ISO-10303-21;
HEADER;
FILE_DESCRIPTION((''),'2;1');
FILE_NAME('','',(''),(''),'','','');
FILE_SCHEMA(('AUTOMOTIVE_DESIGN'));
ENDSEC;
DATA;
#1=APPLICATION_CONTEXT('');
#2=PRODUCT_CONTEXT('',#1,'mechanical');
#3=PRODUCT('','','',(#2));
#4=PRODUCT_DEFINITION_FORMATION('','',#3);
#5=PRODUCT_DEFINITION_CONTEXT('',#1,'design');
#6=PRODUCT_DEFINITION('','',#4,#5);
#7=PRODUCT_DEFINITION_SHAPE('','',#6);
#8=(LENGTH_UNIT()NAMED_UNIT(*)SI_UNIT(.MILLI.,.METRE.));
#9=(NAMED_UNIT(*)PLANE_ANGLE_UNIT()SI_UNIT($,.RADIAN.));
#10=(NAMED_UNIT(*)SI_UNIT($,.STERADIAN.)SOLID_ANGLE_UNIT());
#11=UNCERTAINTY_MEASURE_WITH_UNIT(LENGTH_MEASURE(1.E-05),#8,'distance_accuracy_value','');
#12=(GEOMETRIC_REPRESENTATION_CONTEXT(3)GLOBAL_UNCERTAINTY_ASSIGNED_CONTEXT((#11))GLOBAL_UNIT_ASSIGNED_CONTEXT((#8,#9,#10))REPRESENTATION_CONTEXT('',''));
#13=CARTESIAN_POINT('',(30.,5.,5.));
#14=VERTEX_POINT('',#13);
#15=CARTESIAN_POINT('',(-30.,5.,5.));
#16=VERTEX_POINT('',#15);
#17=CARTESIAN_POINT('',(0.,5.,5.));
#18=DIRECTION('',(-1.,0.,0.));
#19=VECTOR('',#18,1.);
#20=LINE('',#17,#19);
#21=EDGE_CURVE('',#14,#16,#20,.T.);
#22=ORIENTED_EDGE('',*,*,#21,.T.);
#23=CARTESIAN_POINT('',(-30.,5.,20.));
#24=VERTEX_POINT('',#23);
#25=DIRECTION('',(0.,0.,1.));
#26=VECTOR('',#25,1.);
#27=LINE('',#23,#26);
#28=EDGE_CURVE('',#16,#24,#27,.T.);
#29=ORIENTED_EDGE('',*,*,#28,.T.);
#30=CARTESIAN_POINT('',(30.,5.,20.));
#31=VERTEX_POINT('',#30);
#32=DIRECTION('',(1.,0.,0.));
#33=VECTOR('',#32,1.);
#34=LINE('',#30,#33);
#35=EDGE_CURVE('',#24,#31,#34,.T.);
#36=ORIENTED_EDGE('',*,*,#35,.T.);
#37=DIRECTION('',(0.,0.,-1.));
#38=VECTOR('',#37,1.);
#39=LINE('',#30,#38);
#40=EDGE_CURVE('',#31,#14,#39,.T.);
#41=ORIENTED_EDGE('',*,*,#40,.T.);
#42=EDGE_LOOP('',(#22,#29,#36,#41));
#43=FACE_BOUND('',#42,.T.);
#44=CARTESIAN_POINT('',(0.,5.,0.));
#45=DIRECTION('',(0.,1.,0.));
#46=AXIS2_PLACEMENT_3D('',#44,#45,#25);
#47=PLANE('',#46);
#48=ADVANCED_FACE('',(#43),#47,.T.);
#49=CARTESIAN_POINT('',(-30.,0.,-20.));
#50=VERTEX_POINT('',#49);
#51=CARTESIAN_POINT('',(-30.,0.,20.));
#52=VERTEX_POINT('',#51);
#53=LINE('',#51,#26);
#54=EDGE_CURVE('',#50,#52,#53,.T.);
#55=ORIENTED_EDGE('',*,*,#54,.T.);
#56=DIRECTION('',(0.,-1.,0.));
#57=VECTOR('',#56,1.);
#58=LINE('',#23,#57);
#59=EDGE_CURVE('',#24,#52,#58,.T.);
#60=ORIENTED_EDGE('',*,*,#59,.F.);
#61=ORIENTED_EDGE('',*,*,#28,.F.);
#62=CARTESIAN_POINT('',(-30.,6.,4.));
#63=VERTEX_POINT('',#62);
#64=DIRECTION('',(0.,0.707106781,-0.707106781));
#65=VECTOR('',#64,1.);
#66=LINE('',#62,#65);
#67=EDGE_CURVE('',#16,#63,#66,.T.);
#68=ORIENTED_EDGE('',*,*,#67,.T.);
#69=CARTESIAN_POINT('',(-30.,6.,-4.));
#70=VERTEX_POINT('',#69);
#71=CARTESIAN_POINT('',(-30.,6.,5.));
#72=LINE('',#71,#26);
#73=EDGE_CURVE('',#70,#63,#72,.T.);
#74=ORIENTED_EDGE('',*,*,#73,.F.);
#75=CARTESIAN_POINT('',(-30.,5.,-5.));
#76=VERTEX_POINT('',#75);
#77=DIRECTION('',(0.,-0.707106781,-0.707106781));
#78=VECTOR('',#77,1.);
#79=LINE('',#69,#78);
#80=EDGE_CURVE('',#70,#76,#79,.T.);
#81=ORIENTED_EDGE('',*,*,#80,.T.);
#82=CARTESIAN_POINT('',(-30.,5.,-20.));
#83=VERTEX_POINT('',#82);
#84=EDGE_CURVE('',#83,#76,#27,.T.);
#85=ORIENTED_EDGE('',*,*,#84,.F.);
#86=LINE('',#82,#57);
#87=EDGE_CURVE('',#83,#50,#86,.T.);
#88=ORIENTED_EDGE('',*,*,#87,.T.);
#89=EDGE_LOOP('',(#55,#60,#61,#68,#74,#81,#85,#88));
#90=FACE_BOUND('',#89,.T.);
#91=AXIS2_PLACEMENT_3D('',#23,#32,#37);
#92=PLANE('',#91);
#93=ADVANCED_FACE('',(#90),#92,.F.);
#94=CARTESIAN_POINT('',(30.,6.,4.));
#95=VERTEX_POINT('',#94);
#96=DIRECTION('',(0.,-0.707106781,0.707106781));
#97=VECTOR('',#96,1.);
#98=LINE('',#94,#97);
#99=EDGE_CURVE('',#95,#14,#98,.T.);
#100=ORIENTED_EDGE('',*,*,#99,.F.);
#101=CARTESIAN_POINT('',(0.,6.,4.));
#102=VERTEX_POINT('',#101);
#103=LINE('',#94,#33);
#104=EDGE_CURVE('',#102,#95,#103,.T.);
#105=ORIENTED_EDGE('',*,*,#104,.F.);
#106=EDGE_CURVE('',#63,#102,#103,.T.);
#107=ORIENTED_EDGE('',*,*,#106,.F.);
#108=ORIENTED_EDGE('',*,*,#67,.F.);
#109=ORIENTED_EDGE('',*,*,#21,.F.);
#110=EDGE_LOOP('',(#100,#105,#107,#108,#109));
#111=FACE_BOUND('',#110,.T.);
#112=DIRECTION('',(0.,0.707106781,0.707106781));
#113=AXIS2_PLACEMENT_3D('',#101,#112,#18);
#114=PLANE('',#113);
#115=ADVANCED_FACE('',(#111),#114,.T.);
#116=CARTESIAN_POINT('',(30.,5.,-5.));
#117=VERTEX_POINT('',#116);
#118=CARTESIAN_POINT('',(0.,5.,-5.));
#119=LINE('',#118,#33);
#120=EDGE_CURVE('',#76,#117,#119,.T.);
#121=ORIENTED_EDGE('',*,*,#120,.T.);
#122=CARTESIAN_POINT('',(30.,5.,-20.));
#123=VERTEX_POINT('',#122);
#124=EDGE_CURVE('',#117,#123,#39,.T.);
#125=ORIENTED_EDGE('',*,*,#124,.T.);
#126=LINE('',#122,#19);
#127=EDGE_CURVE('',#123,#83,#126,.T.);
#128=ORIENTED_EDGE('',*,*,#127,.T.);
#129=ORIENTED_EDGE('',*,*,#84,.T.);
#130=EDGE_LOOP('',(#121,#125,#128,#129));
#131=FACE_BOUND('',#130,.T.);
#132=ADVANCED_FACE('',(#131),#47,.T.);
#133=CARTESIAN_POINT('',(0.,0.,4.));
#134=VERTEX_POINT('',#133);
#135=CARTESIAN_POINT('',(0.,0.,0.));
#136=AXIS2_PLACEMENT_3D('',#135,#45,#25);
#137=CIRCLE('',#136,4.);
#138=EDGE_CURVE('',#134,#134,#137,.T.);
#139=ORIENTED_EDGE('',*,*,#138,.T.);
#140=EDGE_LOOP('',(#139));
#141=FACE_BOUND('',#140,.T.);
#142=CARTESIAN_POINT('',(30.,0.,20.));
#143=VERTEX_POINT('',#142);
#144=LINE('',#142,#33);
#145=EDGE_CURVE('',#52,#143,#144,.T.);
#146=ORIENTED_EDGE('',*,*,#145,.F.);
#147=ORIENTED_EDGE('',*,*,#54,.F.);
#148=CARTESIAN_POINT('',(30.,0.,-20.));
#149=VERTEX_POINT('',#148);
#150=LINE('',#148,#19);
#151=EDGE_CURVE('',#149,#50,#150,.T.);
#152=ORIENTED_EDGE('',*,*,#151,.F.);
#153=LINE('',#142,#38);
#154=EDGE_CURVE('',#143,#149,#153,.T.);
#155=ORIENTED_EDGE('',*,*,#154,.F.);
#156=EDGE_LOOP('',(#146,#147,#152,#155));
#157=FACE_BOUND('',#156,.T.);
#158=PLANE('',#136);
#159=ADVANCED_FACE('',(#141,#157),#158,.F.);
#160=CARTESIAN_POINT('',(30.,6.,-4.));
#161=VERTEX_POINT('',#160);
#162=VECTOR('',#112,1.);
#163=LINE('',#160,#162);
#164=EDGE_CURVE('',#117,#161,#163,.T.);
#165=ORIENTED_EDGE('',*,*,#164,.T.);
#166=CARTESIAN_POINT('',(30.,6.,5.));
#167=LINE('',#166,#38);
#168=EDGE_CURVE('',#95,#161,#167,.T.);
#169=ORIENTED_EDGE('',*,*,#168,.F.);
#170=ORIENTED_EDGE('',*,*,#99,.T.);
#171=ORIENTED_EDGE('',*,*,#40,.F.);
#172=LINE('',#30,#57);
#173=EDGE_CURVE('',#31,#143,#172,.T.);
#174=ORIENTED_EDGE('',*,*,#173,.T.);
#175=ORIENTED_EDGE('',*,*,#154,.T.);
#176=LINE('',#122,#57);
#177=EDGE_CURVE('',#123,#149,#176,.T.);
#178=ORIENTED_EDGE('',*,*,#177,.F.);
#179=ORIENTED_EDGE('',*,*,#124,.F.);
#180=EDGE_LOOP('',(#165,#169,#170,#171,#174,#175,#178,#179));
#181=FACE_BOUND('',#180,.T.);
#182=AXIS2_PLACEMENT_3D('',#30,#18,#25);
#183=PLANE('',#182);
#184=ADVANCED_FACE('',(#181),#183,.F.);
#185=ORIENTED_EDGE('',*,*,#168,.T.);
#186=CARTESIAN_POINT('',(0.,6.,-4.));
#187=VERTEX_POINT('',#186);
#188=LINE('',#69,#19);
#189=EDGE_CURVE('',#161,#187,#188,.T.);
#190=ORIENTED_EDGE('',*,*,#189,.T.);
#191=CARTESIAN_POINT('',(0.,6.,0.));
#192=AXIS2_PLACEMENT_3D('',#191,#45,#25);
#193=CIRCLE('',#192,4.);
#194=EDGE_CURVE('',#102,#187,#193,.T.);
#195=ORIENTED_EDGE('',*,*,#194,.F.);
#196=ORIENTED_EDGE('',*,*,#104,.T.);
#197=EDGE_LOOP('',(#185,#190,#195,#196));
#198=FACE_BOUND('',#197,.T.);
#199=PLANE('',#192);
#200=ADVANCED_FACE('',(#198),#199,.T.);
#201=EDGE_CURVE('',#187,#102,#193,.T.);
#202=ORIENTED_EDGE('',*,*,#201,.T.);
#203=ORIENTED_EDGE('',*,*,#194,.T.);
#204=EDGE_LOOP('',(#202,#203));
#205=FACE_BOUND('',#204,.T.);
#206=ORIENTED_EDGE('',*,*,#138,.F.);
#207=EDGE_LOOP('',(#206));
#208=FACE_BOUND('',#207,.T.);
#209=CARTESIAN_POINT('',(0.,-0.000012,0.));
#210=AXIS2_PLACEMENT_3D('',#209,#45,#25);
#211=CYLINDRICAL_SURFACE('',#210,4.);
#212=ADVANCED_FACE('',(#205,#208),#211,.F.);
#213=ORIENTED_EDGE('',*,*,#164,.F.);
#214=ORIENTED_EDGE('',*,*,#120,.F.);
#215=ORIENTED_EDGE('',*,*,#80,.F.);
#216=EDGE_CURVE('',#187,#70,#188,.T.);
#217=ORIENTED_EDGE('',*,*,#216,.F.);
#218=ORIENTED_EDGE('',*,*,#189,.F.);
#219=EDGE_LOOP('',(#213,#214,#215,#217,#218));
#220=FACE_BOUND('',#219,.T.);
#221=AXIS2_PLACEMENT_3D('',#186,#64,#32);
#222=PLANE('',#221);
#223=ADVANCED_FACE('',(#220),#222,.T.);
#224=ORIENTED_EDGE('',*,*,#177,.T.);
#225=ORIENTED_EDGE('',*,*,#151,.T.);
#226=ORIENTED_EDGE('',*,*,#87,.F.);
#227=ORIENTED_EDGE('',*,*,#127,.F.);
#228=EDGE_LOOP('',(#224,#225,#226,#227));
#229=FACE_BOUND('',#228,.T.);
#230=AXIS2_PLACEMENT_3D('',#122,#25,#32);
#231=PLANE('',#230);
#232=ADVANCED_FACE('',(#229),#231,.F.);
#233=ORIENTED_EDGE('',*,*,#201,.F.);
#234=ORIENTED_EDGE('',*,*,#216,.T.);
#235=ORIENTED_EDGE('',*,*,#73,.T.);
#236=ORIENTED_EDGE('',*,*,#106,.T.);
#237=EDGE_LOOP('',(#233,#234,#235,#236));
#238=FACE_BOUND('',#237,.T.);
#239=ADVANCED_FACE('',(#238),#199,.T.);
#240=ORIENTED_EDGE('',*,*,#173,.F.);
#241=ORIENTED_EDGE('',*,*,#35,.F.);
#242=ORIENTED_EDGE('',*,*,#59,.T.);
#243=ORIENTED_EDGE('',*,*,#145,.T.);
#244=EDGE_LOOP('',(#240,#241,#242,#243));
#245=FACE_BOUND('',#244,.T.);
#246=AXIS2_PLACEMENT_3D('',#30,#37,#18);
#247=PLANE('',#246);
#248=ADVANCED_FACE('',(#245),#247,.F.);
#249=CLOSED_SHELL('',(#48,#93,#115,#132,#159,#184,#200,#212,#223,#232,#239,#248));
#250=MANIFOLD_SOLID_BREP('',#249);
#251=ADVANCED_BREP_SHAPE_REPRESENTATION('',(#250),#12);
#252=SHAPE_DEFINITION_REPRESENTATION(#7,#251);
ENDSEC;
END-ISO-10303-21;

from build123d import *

# Parameters (mm, degrees)
SZKIC1_W                        = 60
SZKIC1_H                        = 40
DODANIE_WYCI_GNI_CIE1_DEPTH     = 5
SZKIC2_W                        = 60
SZKIC2_H                        = 10
DODANIE_WYCI_GNI_CIE2_DEPTH     = 6
SFAZOWANIE1_SIZE                = 1
WYTNIJ_WYCI_GNI_CIE1_DEPTH      = 37.551333765
WYTNIJ_WYCI_GNI_CIE1_DEPTH_BACK = 37.551333765
SZKIC3_R                        = 4


with BuildPart() as part:
    # Szkic1 → Dodanie-wyciągnięcie1 (new body)
    with BuildSketch(Plane(origin=(0, 0, 0), x_dir=(1, 0, 0), z_dir=(0, 1, 0))):
        Rectangle(SZKIC1_W, SZKIC1_H)
    extrude(amount=DODANIE_WYCI_GNI_CIE1_DEPTH)

    # Szkic2 → Dodanie-wyciągnięcie2 (add)
    with BuildSketch(Plane(origin=(0, 0, 0), x_dir=(1, 0, 0), z_dir=(0, 1, 0))):
        Rectangle(SZKIC2_W, SZKIC2_H)
    extrude(amount=DODANIE_WYCI_GNI_CIE2_DEPTH)

    # Sfazowanie1
    sfazowanie1_edges = [part.edges().sort_by_distance(p)[0] for p in [
        (0, 6, -5),
        (0, 6, 5),
    ]]
    chamfer(sfazowanie1_edges, length=SFAZOWANIE1_SIZE - 0.0001)  # a hair under: the kernel refuses the full size

    # Szkic3 → Wytnij-wyciągnięcie1 (cut, two sides: drawn at the far end of the back side and taken through both)
    with BuildSketch(Plane(origin=(0, 0, 0), x_dir=(1, 0, 0), z_dir=(0, 1, 0)).offset(-WYTNIJ_WYCI_GNI_CIE1_DEPTH_BACK)):
        with Locations(Location((0, 0, 0), (0, 0, 270))):
            Circle(SZKIC3_R)
    extrude(amount=WYTNIJ_WYCI_GNI_CIE1_DEPTH + WYTNIJ_WYCI_GNI_CIE1_DEPTH_BACK, mode=Mode.SUBTRACT)


solid = part.part
